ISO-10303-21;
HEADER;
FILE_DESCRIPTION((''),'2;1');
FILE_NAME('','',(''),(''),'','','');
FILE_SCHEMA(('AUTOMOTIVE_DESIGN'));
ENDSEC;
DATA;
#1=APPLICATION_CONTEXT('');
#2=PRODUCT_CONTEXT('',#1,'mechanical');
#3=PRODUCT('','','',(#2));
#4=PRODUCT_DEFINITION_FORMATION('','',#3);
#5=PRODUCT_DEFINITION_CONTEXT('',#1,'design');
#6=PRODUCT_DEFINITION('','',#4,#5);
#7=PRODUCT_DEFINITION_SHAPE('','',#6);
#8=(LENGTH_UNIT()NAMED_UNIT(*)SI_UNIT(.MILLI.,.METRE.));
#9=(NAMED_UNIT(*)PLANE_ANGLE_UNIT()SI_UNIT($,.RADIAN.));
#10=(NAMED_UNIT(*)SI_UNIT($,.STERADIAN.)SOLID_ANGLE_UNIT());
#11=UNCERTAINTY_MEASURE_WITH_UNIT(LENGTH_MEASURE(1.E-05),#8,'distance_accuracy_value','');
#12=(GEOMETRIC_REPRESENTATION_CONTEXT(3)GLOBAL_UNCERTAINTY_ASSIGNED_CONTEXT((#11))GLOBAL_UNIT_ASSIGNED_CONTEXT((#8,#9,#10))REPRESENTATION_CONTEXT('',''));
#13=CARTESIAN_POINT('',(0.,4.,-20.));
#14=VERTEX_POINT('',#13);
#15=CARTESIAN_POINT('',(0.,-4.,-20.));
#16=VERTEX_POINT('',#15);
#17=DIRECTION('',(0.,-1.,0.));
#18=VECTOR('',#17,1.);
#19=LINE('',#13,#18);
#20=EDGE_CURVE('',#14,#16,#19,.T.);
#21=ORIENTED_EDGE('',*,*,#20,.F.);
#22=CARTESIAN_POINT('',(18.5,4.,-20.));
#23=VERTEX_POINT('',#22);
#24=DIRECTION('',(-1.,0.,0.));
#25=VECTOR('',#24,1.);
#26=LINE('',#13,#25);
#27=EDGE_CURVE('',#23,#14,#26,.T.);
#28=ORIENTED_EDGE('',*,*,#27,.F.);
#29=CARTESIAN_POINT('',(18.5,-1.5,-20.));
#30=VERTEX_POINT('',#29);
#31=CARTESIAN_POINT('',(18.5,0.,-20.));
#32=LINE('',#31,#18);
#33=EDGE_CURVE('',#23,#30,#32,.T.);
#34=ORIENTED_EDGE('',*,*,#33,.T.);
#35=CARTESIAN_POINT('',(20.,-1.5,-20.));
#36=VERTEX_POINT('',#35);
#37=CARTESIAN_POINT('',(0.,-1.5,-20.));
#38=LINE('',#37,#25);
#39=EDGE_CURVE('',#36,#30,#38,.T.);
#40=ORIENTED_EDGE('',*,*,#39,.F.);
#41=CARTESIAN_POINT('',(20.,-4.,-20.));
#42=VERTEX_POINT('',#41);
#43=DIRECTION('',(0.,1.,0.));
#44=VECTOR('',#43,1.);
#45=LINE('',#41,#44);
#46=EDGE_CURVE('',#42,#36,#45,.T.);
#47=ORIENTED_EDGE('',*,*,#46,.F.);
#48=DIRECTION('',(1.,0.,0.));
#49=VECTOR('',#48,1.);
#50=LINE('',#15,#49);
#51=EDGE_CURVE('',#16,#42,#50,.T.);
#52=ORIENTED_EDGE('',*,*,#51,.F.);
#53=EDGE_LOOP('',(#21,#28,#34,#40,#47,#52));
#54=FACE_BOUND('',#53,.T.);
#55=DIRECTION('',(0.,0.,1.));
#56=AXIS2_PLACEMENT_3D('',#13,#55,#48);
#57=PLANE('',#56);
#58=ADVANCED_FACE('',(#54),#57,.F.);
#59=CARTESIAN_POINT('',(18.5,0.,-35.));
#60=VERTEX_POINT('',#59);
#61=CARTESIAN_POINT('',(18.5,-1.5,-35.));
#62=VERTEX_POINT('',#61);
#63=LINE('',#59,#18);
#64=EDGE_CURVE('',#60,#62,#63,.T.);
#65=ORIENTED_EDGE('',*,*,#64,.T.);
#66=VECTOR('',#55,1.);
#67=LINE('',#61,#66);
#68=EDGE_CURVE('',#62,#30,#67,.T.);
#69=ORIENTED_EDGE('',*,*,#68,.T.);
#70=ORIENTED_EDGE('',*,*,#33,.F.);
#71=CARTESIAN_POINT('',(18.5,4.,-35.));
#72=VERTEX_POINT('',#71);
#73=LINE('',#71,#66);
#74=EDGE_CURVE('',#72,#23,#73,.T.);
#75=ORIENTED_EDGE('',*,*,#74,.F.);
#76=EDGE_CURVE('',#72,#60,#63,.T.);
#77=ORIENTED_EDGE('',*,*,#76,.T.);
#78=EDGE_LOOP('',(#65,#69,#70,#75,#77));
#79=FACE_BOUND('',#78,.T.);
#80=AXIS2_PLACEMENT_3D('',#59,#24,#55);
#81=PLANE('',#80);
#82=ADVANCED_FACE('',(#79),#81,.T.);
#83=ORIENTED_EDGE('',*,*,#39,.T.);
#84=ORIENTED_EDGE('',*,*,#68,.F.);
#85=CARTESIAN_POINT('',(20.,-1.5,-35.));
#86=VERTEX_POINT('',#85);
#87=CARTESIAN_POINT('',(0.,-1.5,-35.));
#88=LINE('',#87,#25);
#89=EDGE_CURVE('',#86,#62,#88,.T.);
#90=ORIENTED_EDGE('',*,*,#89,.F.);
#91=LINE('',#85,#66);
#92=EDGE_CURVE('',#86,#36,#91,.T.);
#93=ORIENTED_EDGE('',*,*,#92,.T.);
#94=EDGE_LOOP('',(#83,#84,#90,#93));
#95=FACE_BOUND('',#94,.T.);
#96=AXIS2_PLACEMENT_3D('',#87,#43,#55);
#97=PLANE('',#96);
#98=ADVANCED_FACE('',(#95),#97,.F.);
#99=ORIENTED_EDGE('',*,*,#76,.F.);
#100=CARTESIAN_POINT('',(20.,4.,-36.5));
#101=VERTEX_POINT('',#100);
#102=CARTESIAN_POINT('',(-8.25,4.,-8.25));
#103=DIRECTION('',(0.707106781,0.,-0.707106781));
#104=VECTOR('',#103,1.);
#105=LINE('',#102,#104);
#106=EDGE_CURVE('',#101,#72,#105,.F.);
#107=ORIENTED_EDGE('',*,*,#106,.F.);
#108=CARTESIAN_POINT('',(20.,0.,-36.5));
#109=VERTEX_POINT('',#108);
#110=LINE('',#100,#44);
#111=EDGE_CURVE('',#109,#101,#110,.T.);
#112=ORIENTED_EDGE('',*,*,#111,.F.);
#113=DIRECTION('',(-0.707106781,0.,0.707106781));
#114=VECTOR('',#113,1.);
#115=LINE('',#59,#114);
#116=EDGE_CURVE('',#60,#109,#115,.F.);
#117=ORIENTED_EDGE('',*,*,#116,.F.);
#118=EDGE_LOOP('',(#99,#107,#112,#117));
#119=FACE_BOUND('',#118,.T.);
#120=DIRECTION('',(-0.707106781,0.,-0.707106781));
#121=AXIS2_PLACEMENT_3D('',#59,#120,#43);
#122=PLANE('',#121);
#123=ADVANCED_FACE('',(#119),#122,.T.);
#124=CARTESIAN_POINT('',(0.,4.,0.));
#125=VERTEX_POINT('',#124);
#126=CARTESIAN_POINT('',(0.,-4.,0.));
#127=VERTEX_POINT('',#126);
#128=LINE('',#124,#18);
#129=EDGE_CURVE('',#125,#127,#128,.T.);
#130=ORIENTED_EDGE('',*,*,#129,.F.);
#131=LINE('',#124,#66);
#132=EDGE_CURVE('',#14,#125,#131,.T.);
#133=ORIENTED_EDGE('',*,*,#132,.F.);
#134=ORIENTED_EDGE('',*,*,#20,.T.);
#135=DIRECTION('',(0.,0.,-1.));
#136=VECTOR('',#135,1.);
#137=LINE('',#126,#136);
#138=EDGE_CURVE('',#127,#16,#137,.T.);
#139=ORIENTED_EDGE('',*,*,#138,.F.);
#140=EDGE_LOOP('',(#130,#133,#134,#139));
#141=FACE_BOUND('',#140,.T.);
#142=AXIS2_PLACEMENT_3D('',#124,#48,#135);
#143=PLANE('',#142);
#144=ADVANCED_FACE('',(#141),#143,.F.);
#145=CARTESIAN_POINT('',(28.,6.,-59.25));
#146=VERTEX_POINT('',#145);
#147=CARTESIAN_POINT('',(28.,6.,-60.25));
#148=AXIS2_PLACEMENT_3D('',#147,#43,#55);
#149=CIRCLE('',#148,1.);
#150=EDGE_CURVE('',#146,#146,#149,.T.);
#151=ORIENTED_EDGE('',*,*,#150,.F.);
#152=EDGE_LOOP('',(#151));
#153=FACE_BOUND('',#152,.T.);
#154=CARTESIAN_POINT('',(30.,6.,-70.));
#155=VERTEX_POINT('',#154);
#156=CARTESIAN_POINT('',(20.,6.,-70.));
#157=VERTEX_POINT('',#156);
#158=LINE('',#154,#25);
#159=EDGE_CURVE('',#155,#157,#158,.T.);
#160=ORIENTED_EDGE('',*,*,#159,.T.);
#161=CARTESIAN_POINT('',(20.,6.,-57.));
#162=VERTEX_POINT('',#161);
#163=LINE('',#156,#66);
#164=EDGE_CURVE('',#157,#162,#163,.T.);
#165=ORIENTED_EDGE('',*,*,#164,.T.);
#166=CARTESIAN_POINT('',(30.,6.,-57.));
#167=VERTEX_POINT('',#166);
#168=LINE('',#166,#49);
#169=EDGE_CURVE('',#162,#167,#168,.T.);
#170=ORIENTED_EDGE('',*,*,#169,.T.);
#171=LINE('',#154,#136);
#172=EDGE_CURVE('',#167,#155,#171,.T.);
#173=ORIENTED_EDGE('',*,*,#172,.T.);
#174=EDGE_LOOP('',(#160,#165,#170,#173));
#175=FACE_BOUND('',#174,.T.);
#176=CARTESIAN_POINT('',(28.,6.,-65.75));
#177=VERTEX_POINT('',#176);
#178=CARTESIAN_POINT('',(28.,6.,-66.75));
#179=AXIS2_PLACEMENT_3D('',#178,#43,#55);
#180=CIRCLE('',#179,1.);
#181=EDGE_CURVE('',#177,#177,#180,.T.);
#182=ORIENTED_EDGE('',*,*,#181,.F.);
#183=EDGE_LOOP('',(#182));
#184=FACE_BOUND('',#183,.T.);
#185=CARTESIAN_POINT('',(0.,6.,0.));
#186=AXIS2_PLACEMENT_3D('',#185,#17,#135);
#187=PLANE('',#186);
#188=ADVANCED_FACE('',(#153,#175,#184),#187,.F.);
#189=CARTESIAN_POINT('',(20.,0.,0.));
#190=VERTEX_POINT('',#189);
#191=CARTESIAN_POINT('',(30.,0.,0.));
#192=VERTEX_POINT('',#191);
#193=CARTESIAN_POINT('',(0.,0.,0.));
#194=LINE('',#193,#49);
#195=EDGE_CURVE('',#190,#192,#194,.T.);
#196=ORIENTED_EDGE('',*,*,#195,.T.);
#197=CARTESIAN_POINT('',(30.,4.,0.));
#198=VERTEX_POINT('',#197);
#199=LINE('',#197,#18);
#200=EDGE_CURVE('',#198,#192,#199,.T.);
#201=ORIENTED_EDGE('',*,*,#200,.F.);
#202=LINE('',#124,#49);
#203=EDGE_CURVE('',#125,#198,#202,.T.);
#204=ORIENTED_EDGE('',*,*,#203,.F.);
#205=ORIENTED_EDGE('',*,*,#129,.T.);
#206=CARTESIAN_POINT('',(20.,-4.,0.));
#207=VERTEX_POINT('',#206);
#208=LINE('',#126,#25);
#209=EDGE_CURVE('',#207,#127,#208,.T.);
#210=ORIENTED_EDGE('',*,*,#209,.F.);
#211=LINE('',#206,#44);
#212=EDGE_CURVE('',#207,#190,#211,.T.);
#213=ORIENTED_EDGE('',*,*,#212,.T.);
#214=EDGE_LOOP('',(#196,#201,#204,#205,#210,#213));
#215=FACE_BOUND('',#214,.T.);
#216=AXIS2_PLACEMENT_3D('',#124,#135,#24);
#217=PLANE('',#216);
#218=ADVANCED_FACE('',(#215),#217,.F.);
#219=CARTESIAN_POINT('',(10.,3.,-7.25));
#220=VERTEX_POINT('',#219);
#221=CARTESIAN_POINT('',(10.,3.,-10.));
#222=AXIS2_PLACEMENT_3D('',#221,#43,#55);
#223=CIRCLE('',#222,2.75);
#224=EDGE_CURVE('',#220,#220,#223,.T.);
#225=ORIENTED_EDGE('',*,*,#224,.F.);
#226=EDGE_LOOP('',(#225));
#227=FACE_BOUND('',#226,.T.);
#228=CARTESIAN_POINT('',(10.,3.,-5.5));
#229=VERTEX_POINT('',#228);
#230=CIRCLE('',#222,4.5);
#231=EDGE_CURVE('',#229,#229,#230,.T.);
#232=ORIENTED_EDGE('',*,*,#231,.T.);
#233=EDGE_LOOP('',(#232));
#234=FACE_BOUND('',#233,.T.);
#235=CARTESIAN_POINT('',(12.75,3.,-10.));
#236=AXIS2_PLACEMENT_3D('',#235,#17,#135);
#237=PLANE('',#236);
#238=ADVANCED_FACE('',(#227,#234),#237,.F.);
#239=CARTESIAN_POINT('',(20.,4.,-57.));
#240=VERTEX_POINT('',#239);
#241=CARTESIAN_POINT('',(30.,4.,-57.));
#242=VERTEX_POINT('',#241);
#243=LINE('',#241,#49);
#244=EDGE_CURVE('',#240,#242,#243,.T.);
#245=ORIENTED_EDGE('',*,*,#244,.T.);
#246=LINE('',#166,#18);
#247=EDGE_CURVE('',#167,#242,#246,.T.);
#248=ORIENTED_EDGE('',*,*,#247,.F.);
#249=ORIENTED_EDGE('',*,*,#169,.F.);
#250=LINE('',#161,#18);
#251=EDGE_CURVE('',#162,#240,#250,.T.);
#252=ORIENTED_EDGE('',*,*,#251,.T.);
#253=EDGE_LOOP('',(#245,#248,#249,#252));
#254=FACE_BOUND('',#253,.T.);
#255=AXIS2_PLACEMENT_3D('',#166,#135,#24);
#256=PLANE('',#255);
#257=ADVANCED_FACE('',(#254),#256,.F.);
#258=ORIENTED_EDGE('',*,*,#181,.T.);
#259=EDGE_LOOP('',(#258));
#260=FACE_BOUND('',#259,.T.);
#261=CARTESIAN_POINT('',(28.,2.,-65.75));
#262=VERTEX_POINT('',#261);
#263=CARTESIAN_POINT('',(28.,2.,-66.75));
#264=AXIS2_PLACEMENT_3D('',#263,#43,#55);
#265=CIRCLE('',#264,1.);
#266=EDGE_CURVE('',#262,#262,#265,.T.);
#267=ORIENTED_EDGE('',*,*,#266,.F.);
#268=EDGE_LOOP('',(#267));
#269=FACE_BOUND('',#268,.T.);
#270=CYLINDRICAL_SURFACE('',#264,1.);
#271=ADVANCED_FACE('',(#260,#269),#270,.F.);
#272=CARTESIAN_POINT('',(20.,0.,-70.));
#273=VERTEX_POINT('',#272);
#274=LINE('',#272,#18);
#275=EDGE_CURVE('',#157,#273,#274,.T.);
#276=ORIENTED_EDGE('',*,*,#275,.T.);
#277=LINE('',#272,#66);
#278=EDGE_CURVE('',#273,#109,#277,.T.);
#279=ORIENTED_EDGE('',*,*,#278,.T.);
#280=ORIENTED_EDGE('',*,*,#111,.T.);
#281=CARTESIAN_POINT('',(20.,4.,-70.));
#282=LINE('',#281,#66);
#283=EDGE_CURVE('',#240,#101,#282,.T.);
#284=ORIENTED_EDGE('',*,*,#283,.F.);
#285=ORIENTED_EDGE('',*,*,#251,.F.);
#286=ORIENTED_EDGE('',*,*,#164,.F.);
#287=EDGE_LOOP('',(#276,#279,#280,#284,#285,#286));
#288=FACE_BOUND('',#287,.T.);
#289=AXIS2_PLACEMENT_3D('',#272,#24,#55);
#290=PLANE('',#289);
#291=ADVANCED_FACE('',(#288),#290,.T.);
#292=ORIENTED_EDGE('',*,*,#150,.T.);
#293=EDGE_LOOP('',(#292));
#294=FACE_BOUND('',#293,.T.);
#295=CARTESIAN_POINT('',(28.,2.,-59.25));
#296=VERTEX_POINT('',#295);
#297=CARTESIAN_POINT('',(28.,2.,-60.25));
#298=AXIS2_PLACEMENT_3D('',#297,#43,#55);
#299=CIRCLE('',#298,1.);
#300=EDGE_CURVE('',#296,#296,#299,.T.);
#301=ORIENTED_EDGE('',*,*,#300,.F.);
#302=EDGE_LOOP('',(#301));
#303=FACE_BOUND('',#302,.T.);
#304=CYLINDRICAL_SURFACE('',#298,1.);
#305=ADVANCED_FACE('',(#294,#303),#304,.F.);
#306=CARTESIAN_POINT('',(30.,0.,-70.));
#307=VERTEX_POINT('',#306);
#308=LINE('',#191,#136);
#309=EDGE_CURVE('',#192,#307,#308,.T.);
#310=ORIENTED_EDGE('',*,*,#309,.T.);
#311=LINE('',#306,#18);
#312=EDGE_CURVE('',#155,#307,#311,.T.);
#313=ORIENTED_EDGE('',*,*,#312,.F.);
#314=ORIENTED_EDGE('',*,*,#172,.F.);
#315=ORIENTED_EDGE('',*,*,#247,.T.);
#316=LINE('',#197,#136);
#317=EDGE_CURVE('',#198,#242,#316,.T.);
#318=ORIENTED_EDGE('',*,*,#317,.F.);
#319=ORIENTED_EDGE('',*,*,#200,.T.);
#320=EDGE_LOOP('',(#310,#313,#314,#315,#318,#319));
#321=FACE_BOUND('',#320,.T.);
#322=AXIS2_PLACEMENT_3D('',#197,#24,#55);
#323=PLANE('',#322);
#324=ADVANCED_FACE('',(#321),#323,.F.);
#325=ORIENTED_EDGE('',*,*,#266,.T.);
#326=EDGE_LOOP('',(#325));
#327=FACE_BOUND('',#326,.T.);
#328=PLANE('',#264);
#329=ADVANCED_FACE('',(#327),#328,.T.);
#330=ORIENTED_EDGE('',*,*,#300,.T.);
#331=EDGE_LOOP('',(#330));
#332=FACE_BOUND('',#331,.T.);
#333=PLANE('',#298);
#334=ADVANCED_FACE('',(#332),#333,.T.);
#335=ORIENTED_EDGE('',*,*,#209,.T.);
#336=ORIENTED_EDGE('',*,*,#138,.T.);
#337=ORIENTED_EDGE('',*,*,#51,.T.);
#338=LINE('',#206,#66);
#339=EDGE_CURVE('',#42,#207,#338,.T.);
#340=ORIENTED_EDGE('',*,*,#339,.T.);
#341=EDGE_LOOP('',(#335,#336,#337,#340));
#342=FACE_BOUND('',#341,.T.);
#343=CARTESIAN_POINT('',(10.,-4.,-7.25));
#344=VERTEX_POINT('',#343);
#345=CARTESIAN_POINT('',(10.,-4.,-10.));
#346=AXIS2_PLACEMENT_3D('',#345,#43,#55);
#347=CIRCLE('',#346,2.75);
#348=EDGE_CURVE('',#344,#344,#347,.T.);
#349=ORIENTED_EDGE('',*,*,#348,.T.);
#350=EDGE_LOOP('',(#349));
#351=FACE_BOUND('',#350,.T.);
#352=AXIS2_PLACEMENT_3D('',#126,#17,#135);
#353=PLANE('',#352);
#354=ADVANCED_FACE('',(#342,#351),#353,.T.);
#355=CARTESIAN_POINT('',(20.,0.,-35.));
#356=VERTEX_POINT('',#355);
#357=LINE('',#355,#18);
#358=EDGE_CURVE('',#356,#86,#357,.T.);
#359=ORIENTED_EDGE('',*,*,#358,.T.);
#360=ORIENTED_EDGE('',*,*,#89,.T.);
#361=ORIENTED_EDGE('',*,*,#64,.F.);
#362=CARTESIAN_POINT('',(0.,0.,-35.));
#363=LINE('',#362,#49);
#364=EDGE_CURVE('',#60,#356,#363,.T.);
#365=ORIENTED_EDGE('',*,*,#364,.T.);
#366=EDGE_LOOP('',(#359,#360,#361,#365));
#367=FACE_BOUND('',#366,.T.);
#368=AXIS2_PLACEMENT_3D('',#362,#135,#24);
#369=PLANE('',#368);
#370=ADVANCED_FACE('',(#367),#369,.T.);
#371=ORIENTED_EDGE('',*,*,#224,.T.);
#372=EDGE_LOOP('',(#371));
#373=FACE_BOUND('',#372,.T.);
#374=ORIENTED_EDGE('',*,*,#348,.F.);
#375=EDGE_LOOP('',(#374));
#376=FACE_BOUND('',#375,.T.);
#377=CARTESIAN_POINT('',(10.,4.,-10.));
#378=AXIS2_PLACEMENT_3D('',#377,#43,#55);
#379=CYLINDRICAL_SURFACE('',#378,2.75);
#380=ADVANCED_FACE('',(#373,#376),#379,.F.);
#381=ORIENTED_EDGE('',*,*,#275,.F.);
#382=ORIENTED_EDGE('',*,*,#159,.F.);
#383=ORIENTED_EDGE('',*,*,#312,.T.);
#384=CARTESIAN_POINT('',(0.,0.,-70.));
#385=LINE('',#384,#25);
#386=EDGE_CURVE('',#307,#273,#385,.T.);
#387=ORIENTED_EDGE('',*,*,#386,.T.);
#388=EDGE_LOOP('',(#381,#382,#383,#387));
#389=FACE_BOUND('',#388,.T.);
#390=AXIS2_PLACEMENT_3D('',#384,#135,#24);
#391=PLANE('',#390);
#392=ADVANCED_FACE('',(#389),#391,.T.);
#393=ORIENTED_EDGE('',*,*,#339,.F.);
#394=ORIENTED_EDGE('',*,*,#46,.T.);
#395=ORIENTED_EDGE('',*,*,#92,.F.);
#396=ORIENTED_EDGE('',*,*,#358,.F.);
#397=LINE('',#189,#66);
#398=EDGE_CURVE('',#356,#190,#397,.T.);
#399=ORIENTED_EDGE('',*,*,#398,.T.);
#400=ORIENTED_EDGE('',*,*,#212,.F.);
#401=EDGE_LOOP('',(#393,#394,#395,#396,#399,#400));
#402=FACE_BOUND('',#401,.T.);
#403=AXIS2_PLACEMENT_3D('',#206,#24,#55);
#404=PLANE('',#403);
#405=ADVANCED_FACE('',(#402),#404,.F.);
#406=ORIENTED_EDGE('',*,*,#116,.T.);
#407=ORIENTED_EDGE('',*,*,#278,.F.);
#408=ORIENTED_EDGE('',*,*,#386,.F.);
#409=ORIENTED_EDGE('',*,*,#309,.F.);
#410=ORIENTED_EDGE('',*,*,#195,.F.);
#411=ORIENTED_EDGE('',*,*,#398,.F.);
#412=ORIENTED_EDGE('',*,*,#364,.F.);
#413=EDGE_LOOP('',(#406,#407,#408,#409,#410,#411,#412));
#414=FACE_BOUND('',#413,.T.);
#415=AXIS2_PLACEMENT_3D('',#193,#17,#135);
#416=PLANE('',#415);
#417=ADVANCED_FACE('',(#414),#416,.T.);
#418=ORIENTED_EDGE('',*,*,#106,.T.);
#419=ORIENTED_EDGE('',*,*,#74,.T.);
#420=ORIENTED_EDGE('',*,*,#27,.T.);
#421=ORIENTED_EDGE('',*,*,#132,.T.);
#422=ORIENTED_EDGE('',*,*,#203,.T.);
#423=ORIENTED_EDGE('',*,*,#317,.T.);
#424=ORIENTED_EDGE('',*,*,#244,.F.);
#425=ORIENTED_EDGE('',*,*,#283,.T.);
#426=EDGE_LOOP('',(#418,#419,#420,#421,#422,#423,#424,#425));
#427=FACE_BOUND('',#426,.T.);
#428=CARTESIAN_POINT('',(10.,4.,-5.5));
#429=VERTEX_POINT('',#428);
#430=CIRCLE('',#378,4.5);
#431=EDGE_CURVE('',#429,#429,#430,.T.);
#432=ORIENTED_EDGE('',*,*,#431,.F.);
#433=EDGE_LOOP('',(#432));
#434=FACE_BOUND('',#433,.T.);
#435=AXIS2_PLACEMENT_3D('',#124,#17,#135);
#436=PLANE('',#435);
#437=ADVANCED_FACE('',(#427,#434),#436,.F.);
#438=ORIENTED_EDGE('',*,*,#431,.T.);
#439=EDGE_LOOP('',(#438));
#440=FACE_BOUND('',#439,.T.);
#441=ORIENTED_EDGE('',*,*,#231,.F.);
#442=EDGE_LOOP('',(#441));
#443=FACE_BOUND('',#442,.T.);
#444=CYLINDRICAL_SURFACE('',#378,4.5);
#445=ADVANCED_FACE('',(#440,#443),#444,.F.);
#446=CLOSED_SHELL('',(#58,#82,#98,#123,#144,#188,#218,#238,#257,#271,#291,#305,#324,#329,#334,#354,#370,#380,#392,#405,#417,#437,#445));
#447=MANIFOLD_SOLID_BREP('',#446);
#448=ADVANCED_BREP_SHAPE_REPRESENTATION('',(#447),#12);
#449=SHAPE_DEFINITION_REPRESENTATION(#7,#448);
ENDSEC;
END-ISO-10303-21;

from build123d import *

# Parameters (mm, degrees)
SKETCH1_W                       = 30
SKETCH1_H                       = 20
BOSS_EXTRUDE1_DEPTH             = 4
SKETCH2_W                       = 20
SKETCH2_H                       = 20
BOSS_EXTRUDE2_DEPTH             = 4
CBORE_FOR_M5_SBHCS1_D           = 5.5
CBORE_FOR_M5_SBHCS1_CBORE_D     = 9
CBORE_FOR_M5_SBHCS1_CBORE_DEPTH = 1
SKETCH10_W                      = 10
SKETCH10_H                      = 4
BOSS_EXTRUDE3_DEPTH             = 50
BOSS_EXTRUDE4_DEPTH             = 15
SKETCH11_W                      = 10
SKETCH11_H                      = 13
BOSS_EXTRUDE5_DEPTH             = 2
SKETCH12_R                      = 1
CUT_EXTRUDE1_DEPTH              = 4
CHAMFER1_SIZE                   = 1.5


with BuildPart() as part:
    # Sketch1 → Boss-Extrude1 (new body)
    with BuildSketch(Plane(origin=(0, 0, 0), x_dir=(1, 0, 0), z_dir=(0, 1, 0))):
        with Locations((15, 10)):
            Rectangle(SKETCH1_W, SKETCH1_H)
    extrude(amount=BOSS_EXTRUDE1_DEPTH)

    # Sketch2 → Boss-Extrude2 (add)
    with BuildSketch(Plane.XZ):
        with Locations((10, -10)):
            Rectangle(SKETCH2_W, SKETCH2_H)
    extrude(amount=BOSS_EXTRUDE2_DEPTH)

    # CBORE for M5 SBHCS1 (through all)
    with Locations(Plane(origin=(0, 4, 0), x_dir=(1, 0, 0), z_dir=(0, 1, 0))):
        with Locations((10, 10)):
            CounterBoreHole(CBORE_FOR_M5_SBHCS1_D / 2, CBORE_FOR_M5_SBHCS1_CBORE_D / 2, CBORE_FOR_M5_SBHCS1_CBORE_DEPTH)

    # Sketch10 → Boss-Extrude3 (add)
    with BuildSketch(Plane(origin=(0, 0, -20), x_dir=(-1, 0, 0), z_dir=(0, 0, -1))):
        with Locations((-25, 2)):
            Rectangle(SKETCH10_W, SKETCH10_H)
    extrude(amount=BOSS_EXTRUDE3_DEPTH)

    # Sketch10<3> → Boss-Extrude4 (add)
    with BuildSketch(Plane(origin=(0, 0, -20), x_dir=(-1, 0, 0), z_dir=(0, 0, -1))):
        Polygon((-18.5, 4), (-20, 4), (-20, 0), (-20, -1.5), (-18.5, -1.5), align=None)
    extrude(amount=BOSS_EXTRUDE4_DEPTH)

    # Sketch11 → Boss-Extrude5 (add)
    with BuildSketch(Plane(origin=(0, 4, 0), x_dir=(1, 0, 0), z_dir=(0, 1, 0))):
        with Locations((25, 63.5)):
            Rectangle(SKETCH11_W, SKETCH11_H)
    extrude(amount=BOSS_EXTRUDE5_DEPTH)

    # Sketch12 → Cut-Extrude1 (cut)
    with BuildSketch(Plane(origin=(0, 6, 0), x_dir=(1, 0, 0), z_dir=(0, 1, 0))):
        with Locations(Location((28, 60.25, 0), (0, 0, 270))):
            Circle(SKETCH12_R)
        with Locations(Location((28, 66.75, 0), (0, 0, 270))):
            Circle(SKETCH12_R)
    extrude(amount=-CUT_EXTRUDE1_DEPTH, mode=Mode.SUBTRACT)

    # Chamfer1
    chamfer1_edges = [part.edges().sort_by_distance(p)[0] for p in [
        (20, 2, -35),
    ]]
    chamfer(chamfer1_edges, length=CHAMFER1_SIZE - 0.0001)  # a hair under: the kernel refuses the full size


solid = part.part
